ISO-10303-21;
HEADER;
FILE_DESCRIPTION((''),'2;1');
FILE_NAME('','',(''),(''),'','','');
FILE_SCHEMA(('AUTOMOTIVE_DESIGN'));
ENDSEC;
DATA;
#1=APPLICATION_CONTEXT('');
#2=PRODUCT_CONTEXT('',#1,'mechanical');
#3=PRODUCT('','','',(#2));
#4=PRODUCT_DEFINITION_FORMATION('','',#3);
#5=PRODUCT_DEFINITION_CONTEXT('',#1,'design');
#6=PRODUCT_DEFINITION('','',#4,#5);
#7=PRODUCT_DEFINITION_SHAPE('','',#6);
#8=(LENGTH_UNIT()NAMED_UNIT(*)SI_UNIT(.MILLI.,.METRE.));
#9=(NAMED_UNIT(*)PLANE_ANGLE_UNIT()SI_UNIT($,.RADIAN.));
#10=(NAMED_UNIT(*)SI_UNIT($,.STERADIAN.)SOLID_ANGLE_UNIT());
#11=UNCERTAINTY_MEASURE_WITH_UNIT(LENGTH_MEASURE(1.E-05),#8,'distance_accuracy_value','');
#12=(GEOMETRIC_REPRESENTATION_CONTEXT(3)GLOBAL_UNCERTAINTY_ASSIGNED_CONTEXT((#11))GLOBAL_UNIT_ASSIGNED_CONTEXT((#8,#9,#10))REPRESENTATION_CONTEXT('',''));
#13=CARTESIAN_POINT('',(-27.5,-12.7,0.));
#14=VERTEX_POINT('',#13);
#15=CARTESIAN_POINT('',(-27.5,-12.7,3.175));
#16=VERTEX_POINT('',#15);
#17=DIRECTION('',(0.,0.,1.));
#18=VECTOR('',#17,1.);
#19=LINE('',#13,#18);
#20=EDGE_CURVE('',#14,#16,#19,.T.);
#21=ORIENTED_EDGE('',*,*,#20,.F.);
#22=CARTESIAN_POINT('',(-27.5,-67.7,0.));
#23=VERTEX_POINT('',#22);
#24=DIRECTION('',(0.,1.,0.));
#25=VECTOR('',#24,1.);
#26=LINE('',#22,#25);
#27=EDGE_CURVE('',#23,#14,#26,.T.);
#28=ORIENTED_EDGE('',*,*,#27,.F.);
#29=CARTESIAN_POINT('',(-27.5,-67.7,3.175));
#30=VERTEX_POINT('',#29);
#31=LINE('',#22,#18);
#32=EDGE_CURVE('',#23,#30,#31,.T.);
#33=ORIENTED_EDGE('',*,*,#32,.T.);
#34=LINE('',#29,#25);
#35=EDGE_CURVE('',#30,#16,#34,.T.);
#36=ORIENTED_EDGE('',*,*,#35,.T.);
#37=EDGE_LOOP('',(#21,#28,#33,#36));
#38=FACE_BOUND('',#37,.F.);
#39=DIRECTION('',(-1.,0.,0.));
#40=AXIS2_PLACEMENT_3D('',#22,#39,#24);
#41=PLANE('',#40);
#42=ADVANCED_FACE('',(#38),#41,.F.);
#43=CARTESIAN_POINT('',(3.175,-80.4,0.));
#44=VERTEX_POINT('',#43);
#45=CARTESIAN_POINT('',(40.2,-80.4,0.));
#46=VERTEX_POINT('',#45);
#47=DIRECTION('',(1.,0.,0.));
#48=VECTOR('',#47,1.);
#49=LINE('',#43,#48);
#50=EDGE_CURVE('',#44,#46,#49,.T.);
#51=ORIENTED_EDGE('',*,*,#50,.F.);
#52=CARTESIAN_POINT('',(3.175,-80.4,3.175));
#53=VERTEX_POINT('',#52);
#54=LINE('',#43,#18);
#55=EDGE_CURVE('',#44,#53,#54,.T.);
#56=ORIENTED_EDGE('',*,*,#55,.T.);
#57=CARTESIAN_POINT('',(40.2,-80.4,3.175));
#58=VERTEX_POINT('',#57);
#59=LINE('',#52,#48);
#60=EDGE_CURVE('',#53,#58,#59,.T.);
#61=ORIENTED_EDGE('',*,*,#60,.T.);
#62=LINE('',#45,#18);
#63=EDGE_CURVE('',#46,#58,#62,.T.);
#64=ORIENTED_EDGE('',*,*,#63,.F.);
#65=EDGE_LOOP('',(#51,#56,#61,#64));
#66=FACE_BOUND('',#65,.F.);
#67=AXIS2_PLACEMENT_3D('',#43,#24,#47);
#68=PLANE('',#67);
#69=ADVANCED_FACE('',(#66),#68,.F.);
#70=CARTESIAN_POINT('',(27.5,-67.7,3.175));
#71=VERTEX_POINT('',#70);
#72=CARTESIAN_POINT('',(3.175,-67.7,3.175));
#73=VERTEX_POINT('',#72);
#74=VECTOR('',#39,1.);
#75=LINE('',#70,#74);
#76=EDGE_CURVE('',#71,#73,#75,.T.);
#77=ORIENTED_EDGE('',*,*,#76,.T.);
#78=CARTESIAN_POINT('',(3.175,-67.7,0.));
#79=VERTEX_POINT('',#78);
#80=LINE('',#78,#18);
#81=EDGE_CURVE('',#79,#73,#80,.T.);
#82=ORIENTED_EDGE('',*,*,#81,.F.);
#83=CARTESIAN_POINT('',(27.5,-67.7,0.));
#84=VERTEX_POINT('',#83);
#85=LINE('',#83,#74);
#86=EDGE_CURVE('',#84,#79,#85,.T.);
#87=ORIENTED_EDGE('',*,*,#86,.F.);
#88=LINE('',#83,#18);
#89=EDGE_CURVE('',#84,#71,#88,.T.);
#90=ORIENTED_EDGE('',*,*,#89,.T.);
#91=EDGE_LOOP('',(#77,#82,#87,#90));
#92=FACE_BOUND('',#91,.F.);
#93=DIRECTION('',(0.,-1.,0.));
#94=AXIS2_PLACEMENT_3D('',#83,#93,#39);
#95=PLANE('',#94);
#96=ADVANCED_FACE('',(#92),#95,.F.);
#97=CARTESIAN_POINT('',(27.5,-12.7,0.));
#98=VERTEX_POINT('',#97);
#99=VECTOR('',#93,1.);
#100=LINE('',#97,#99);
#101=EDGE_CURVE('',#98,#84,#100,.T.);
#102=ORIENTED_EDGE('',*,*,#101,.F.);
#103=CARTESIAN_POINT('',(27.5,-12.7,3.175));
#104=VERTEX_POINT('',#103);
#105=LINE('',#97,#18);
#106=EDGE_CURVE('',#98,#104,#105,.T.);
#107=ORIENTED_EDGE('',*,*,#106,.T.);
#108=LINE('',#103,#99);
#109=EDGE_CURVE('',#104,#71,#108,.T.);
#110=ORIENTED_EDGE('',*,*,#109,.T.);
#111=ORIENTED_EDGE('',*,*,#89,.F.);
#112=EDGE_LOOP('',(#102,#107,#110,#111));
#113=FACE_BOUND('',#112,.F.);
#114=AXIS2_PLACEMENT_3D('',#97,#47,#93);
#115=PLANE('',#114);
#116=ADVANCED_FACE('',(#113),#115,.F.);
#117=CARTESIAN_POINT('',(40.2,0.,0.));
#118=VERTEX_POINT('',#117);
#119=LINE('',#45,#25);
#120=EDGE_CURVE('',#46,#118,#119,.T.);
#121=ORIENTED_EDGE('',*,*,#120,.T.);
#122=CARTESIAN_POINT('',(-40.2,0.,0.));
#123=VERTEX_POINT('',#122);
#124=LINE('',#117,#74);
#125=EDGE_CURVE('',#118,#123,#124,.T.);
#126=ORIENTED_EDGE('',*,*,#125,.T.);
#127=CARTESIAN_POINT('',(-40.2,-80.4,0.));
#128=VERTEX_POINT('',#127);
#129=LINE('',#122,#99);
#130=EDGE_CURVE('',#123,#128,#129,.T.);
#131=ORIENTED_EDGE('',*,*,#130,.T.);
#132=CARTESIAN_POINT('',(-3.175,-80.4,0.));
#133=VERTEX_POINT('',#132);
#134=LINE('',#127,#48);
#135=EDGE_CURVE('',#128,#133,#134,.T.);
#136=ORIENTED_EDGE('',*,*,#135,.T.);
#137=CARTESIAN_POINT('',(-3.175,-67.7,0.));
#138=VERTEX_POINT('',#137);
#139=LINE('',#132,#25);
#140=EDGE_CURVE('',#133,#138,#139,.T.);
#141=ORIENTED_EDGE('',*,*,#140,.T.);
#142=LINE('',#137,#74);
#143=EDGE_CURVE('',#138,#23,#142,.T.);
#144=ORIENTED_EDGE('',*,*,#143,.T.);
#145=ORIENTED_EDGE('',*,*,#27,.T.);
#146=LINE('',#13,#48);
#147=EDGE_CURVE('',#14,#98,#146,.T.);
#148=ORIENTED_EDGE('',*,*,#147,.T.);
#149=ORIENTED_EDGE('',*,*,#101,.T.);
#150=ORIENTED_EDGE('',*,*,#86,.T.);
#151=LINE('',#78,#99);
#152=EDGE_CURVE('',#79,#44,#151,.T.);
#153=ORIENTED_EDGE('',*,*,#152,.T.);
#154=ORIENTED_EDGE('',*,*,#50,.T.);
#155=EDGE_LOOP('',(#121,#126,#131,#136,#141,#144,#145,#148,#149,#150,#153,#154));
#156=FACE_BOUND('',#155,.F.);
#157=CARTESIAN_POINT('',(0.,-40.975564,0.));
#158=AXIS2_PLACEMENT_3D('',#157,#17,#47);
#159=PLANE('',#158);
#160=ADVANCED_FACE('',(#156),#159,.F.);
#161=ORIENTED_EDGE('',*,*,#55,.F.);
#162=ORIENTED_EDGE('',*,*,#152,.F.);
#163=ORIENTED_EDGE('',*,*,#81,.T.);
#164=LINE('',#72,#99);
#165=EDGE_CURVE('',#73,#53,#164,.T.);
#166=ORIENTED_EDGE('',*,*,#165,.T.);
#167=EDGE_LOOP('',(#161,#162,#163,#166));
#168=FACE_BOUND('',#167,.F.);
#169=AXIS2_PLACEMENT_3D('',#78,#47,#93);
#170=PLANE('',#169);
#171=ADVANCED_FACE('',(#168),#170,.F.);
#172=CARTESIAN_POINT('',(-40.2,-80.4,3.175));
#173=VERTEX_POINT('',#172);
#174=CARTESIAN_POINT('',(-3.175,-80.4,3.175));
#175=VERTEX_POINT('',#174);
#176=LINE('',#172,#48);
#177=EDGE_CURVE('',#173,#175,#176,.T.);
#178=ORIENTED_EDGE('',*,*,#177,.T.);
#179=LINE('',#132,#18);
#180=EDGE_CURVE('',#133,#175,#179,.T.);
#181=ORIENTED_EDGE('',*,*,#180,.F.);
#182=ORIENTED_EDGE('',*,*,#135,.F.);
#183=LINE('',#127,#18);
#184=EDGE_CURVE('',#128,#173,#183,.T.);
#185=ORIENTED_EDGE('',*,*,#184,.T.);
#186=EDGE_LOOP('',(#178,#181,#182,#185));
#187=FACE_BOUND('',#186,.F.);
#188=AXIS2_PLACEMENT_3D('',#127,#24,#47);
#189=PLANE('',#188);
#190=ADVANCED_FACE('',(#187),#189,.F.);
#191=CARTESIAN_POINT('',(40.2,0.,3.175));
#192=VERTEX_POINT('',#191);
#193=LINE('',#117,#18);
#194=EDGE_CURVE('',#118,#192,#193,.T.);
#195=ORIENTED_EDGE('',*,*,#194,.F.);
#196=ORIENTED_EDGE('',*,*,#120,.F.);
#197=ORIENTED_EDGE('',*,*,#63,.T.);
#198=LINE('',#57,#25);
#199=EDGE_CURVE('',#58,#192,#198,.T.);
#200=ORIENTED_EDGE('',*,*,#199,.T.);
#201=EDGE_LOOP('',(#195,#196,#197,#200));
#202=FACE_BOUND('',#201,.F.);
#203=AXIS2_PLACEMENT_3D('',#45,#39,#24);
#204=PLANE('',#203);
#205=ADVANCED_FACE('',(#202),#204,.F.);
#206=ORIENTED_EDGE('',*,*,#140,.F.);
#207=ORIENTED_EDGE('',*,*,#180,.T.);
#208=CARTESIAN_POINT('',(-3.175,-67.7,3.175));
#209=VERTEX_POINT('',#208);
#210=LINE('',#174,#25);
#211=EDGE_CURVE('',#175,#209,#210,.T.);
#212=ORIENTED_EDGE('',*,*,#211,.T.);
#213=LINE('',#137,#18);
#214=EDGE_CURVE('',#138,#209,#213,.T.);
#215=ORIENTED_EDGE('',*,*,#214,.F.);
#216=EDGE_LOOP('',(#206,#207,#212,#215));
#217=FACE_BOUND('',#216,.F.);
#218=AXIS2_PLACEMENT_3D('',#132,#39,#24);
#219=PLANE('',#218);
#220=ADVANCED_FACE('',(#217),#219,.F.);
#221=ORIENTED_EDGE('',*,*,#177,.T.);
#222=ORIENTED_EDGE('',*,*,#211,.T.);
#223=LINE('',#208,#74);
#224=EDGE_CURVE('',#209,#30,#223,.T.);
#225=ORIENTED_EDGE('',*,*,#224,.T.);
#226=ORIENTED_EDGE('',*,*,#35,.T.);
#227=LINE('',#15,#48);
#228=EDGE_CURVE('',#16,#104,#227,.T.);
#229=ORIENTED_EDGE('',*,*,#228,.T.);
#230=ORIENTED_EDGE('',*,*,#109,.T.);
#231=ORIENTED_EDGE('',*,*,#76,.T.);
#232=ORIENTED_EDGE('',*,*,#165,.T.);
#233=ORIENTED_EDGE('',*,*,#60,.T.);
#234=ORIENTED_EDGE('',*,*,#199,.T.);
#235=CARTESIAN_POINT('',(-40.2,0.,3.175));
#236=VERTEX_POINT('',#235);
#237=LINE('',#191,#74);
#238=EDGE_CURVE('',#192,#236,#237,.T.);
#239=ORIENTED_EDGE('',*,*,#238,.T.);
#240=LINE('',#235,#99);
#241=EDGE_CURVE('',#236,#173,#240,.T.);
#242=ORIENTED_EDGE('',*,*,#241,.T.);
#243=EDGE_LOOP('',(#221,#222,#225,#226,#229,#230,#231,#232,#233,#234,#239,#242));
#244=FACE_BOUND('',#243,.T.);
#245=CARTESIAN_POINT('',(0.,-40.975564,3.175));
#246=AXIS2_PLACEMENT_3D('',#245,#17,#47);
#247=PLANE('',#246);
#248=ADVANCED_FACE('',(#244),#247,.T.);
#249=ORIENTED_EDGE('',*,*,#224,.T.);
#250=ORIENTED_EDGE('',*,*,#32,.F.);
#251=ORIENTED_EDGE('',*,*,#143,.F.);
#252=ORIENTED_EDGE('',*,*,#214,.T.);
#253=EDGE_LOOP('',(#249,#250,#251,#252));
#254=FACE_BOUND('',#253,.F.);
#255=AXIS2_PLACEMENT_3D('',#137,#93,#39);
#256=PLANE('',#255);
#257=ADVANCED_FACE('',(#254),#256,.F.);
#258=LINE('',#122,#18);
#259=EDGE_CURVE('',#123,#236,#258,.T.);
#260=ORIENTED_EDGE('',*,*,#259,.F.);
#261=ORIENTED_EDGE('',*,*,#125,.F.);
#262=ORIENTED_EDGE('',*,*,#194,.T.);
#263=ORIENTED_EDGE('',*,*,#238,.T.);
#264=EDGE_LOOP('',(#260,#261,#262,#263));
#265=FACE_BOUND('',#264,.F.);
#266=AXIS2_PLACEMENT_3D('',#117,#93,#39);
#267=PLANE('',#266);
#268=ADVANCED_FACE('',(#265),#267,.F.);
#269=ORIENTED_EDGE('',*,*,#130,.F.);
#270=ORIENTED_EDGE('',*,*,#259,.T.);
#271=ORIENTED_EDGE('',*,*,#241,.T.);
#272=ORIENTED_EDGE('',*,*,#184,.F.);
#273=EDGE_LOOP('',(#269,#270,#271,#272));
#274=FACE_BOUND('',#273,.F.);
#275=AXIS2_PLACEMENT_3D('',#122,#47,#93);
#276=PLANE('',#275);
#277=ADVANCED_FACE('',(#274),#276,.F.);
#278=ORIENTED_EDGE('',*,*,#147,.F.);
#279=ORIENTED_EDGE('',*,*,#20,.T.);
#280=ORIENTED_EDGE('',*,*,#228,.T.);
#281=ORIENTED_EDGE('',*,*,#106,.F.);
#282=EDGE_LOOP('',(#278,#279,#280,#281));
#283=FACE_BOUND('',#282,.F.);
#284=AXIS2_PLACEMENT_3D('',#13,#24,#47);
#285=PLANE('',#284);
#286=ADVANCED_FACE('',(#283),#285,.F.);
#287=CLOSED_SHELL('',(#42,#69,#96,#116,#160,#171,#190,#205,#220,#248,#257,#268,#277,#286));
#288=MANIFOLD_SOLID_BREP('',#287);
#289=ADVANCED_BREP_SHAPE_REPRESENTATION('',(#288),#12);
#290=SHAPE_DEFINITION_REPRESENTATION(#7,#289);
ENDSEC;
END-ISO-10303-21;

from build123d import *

# Parameters (mm, degrees)
F1_DEPTH = 3.175


# Not quite as in the source:
# - a length typed as a fraction of an inch, garbled in the dataset ("3 / 203.2 mm" for 3/8 in), is restored


with BuildPart() as f1:
    # F0 (on Top) → F1 (new body)
    with BuildSketch(Plane.XY):
        Polygon((40.2, 0), (-40.2, 0), (-40.2, -80.4), (-3.175, -80.4), (-3.175, -67.7), (-27.5, -67.7), (-27.5, -12.7), (27.5, -12.7), (27.5, -67.7), (3.175, -67.7), (3.175, -80.4), (40.2, -80.4), align=None)
    extrude(amount=F1_DEPTH)


solid = f1.part
